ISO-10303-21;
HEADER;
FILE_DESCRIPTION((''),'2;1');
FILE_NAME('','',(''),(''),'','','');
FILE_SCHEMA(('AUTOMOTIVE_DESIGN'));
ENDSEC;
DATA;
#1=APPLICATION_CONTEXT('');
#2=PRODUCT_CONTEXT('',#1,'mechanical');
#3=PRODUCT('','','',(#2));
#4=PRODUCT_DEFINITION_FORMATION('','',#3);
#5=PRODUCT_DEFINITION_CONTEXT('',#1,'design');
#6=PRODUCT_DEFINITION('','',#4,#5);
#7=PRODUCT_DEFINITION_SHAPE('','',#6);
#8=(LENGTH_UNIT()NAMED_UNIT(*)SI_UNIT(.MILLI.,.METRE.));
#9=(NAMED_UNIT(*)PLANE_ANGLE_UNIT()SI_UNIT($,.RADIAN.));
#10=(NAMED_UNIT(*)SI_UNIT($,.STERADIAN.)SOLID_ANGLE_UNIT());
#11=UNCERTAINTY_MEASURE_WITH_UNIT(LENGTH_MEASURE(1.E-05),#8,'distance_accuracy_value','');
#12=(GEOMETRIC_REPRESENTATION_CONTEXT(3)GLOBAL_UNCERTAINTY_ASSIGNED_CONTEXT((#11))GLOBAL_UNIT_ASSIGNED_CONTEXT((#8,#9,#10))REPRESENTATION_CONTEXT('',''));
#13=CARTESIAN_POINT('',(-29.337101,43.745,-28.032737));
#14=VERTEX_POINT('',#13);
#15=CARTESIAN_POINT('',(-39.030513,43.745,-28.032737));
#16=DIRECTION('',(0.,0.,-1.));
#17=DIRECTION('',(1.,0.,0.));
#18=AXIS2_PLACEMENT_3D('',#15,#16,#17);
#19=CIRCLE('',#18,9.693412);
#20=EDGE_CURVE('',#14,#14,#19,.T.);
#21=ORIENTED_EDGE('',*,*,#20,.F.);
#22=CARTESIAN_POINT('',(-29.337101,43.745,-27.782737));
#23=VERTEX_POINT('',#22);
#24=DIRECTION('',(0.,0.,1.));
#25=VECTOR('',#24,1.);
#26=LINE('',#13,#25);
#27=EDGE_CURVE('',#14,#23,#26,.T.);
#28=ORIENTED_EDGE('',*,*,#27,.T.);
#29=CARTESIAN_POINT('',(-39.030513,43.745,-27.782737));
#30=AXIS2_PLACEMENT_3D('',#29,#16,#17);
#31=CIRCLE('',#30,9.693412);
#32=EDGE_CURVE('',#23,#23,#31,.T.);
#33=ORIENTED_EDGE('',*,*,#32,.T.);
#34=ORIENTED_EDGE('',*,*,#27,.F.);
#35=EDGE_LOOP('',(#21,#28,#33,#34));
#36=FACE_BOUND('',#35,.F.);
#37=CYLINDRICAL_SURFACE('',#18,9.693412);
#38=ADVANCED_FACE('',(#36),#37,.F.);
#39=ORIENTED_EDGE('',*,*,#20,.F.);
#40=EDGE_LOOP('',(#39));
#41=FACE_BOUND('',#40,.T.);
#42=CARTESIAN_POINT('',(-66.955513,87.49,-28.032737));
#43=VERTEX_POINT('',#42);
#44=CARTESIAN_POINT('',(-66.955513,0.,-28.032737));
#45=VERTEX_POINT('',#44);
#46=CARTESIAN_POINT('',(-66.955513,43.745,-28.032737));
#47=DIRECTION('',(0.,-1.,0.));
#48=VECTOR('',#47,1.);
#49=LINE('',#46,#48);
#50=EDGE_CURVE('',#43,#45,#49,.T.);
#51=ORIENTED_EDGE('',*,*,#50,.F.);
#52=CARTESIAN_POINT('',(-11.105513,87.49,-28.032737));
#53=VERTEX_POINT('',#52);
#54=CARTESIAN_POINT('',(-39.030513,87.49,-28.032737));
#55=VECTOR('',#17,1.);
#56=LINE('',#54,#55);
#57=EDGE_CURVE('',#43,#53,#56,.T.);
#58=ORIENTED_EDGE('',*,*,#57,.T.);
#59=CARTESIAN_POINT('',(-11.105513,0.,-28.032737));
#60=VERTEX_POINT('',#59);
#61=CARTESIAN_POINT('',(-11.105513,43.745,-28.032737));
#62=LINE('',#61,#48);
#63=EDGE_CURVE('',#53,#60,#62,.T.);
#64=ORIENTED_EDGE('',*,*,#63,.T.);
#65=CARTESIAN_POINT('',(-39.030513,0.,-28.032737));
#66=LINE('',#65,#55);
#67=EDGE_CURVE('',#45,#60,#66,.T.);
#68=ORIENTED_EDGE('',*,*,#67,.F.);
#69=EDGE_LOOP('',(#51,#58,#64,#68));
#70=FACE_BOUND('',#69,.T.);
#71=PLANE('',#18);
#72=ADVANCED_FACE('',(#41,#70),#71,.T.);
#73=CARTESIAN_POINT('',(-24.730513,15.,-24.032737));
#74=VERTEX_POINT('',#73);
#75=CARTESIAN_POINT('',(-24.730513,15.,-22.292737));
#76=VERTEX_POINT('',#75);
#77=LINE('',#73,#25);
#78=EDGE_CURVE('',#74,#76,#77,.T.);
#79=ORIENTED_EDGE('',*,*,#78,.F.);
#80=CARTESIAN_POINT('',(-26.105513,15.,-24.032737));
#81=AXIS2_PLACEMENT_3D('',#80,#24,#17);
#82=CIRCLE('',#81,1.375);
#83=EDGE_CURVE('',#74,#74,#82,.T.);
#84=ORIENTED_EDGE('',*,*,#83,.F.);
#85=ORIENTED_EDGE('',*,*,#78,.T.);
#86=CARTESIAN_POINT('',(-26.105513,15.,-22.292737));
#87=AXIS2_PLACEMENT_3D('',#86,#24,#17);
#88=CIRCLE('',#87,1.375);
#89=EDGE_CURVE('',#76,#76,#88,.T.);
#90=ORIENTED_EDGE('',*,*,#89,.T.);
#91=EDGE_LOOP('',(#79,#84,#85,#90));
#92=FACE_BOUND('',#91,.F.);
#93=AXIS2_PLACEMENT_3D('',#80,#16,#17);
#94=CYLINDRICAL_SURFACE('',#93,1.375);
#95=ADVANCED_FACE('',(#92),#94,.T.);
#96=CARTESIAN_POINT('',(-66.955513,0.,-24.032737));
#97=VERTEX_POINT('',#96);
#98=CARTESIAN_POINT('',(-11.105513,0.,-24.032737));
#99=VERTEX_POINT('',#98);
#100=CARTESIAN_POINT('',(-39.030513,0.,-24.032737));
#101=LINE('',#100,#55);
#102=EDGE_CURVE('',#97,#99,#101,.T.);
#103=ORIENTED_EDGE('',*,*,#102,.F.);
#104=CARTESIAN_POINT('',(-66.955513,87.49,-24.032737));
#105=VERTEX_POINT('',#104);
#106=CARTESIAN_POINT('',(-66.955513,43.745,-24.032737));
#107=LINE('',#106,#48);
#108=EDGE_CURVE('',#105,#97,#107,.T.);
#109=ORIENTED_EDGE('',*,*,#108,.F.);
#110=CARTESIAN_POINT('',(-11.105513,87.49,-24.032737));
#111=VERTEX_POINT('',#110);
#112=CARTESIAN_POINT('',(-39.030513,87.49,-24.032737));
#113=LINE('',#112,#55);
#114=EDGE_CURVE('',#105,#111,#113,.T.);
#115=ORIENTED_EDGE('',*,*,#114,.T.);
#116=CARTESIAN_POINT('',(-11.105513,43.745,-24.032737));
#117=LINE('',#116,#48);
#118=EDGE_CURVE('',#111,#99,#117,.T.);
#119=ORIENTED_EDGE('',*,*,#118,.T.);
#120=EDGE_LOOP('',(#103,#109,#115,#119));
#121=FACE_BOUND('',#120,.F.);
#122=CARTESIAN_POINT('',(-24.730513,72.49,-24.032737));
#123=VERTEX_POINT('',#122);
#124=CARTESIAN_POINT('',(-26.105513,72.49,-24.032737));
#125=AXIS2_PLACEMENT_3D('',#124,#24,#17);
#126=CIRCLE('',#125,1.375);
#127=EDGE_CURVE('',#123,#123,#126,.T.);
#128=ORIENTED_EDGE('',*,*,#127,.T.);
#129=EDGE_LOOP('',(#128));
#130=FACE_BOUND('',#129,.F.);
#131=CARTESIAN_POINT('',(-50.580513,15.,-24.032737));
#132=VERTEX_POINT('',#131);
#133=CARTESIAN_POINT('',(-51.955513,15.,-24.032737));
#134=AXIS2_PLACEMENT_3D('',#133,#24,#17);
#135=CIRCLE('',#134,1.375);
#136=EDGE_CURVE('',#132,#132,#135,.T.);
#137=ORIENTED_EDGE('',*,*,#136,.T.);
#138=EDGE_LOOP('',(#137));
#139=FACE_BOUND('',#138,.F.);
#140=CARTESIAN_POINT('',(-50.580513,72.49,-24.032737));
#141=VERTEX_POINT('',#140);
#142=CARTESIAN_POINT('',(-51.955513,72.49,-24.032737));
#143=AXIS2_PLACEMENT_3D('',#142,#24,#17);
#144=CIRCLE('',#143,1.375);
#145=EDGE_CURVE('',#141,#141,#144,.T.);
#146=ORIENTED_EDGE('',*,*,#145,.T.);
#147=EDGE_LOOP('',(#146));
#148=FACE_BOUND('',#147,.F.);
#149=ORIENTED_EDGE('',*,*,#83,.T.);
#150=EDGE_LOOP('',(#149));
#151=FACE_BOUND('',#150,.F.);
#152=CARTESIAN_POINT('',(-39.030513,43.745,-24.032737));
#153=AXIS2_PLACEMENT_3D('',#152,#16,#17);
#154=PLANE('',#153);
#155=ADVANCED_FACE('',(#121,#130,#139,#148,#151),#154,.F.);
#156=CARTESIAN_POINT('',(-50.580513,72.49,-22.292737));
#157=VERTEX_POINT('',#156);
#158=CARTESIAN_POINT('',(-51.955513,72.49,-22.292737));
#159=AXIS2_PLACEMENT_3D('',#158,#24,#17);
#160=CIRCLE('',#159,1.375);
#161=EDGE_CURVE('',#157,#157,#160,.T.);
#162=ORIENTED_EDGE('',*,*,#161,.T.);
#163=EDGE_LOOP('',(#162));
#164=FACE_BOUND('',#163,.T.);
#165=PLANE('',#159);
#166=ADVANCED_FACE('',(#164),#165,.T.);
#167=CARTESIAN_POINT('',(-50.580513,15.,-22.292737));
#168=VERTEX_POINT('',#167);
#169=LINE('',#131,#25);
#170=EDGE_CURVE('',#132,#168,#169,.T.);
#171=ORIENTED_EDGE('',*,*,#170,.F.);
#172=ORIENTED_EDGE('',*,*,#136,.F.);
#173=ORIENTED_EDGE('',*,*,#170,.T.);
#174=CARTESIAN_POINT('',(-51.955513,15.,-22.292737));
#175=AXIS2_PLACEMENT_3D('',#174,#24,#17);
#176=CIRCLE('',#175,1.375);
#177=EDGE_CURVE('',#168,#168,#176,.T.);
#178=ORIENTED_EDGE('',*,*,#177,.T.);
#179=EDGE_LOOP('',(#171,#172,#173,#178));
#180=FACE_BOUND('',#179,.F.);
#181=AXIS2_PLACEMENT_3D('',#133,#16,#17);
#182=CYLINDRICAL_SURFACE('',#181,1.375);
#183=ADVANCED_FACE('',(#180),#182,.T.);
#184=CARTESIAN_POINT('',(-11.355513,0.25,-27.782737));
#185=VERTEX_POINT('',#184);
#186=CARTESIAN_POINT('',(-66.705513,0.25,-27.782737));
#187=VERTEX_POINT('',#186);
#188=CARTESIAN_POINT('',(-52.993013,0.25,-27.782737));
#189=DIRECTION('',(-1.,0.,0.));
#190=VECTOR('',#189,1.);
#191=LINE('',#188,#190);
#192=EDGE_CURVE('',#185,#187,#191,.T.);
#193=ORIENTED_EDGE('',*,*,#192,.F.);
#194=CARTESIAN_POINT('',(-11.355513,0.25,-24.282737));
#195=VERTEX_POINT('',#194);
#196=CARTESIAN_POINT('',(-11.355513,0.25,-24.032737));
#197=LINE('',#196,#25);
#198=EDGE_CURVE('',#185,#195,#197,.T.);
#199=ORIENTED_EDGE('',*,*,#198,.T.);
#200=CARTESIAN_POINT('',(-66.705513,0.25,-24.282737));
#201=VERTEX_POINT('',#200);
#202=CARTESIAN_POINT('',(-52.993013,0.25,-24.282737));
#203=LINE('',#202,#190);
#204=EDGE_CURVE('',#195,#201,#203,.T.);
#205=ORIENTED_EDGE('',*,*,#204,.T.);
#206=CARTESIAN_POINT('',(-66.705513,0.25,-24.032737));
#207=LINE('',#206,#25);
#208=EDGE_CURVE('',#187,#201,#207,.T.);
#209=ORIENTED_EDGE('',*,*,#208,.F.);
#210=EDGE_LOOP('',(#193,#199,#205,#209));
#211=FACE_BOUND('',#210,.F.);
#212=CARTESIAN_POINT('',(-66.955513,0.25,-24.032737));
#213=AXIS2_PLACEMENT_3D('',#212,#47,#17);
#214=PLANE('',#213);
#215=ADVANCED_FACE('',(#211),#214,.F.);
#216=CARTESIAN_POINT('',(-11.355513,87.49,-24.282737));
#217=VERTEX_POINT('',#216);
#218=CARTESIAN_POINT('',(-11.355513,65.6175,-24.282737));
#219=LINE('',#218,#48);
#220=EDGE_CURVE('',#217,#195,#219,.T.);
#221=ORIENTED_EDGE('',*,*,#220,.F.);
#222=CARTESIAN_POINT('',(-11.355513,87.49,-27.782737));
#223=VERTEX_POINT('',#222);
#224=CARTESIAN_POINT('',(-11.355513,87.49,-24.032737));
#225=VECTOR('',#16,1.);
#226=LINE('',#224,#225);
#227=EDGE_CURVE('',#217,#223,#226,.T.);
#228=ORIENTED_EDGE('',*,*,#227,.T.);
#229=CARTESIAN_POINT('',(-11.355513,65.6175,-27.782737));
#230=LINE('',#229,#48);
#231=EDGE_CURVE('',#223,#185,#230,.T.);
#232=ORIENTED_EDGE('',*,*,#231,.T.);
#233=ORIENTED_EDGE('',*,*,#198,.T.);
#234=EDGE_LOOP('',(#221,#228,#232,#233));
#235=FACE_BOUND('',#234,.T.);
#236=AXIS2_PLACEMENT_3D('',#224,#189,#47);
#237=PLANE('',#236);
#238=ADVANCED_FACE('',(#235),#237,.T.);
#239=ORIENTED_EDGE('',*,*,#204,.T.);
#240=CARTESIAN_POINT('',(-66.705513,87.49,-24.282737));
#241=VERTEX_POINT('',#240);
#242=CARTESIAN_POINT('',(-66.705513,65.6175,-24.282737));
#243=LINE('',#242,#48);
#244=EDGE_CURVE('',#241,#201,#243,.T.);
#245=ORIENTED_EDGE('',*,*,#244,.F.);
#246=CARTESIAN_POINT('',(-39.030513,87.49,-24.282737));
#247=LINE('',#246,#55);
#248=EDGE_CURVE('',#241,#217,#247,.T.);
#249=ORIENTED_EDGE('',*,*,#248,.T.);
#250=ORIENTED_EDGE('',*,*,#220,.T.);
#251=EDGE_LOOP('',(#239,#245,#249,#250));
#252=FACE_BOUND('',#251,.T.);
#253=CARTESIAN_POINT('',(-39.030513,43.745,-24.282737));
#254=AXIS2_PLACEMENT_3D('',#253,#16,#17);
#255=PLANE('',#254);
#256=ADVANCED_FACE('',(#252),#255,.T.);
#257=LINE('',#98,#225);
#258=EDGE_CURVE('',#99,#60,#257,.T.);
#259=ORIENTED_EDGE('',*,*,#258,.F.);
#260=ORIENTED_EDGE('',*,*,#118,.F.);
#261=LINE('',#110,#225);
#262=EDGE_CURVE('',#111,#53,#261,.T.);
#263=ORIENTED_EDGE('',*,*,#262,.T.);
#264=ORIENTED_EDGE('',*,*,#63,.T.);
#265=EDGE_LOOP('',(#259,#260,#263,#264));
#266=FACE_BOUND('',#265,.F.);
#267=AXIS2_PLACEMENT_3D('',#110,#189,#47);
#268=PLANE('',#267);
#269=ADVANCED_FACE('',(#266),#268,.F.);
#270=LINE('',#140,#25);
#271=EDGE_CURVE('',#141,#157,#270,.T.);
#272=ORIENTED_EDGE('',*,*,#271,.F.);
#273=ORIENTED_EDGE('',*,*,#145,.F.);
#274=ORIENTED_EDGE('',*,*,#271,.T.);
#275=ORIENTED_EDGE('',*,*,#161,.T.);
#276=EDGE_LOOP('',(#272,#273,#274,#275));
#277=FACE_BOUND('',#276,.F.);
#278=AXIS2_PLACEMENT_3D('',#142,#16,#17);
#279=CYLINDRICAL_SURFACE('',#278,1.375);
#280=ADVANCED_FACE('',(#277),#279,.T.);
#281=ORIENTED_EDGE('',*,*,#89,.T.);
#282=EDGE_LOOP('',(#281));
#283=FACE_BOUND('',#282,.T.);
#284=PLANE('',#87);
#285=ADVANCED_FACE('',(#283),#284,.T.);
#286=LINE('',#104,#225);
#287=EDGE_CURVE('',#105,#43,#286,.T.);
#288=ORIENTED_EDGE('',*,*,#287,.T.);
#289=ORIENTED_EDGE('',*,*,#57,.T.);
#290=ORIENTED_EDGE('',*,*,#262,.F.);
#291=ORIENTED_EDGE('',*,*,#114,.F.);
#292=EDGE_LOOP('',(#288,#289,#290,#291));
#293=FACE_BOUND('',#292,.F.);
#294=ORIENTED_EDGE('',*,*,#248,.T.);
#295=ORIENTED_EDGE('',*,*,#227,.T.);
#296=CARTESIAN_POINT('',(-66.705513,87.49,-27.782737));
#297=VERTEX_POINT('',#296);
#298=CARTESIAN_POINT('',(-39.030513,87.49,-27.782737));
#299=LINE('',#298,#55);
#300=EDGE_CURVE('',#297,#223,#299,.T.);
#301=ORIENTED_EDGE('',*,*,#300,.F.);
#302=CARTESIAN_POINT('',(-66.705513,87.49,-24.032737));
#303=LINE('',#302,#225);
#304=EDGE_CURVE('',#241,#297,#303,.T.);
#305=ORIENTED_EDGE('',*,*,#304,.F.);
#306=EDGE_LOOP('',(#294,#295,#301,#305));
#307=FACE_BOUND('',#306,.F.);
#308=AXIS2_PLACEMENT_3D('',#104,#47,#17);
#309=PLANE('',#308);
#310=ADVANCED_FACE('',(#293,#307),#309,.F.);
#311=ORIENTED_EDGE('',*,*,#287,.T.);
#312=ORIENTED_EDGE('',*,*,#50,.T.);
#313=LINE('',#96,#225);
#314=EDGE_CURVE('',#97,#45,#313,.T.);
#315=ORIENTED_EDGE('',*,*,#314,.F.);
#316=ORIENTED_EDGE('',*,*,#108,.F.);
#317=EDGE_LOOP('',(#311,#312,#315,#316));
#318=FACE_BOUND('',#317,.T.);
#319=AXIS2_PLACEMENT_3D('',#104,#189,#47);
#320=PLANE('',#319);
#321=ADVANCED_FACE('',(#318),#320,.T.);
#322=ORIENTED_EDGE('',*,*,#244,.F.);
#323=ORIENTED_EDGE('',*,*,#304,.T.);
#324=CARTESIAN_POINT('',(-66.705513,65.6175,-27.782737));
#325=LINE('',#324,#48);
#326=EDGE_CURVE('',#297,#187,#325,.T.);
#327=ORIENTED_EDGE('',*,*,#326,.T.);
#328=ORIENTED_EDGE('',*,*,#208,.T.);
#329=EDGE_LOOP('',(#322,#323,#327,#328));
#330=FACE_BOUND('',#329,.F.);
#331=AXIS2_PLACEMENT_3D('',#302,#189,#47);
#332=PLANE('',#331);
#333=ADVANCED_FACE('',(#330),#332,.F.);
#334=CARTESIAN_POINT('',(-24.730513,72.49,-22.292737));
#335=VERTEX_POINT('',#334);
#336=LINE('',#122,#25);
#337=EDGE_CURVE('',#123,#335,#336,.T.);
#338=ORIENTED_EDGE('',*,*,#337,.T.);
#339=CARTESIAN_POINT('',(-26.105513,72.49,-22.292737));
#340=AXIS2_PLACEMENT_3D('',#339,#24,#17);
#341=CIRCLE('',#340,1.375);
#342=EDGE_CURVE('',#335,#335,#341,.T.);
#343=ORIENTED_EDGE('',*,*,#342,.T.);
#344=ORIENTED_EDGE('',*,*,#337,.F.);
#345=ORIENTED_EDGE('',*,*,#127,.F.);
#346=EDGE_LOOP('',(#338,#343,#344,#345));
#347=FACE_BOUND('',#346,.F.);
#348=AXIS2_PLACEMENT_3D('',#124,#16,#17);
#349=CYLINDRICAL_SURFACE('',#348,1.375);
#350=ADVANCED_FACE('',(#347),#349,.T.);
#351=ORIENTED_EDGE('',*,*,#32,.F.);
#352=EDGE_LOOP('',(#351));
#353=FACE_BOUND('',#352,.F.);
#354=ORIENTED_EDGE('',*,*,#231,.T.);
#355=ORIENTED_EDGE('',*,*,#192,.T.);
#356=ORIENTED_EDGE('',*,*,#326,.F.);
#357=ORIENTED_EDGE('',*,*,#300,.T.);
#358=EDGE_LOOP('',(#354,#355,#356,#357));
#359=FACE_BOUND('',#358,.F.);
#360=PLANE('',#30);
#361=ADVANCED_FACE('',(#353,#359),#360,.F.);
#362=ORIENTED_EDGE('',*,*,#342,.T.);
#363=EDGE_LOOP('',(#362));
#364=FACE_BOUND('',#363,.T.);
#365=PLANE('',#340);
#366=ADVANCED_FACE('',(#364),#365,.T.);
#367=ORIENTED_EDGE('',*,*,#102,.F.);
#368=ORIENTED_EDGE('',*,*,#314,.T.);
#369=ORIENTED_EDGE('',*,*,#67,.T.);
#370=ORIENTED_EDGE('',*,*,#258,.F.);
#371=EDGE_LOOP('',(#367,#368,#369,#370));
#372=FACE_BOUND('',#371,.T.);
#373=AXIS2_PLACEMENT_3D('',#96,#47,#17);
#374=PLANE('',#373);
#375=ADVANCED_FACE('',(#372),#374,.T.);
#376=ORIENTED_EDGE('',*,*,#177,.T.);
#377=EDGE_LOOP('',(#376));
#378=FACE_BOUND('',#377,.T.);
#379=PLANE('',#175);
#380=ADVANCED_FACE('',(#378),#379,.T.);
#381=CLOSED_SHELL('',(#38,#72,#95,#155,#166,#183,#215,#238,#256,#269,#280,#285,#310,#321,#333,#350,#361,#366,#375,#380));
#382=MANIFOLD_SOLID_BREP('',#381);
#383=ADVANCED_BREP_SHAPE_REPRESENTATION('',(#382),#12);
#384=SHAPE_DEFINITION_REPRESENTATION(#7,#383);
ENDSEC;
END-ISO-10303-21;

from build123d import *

# Parameters (mm, degrees)
F0_W      = 55.85
F0_H      = 3
F1_DEPTH  = 87.49
F2_T      = -0.75
F3_DEPTH  = 0.75
F4_W      = 20
F4_H      = 7
F4_W_2    = 16
F4_H_2    = 3
F5_DEPTH  = 0.75
F7_ANGLE  = 90
F8_ANGLE  = 90
F10_ANGLE = 90
F11_ANGLE = 90
F12_R     = 1.5
F13_R     = 1.5
F15_ANGLE = 90
F16_DEPTH = 1
F17_R     = 1.5
F18_R     = 1.5
F19_R     = 1.49999
F20_R     = 1.49999
F21_R     = 4
F22_R     = 4
F23_W     = 55.85
F23_H     = 87.49
F24_DEPTH = 4
F25_T     = -0.25
F26_R     = 9.693411876
F27_DEPTH = 0.25
F29_R     = 1.375
F30_DEPTH = 1.74


# Not quite as in the source:
# - a fillet or chamfer is up to 0.001 mm smaller than in the source, because OpenCascade refuses the exact size


with BuildPart() as f1:
    # F0 (on Front) → F1 (new body)
    with BuildSketch(Plane.XZ):
        with Locations((-39.0305130277, -21.5327367023)):
            Rectangle(F0_W, F0_H)
    extrude(amount=-F1_DEPTH)

    # F2
    f2_openings = [f1.faces().sort_by_distance(p)[0] for p in [
        (-39.030513, 43.745, -20.032737),
    ]]
    offset(amount=F2_T, openings=f2_openings)

    # F3 (cut): a face of the model
    f3_faces = [f1.faces().sort_by_distance(p)[0] for p in [
        (-39.0305130277, 86.74, -21.1577367023),
    ]]
    extrude(f3_faces, amount=-F3_DEPTH, mode=Mode.SUBTRACT)

    # F4 (on face) → F5 (join, through all)
    with BuildSketch(Plane.XY.offset(-22.2827367023)):
        with Locations((-39.0305130277, 90.99)):
            Rectangle(F4_W, F4_H)
        with Locations((-39.0305130277, 90.99)):
            Rectangle(F4_W_2, F4_H_2, mode=Mode.SUBTRACT)
    extrude(amount=-F5_DEPTH)

    # F6 (on face) → F7 (revolve)
    with BuildSketch(Plane.YZ.offset(-66.2055130277)):
        with BuildLine():
            Line((82.49, -21.0327367023), (83.365, -21.0327367023))
            ThreePointArc((83.365, -21.0327367023), (82.49, -20.1577367023), (81.615, -21.0327367023))
            Line((81.615, -21.0327367023), (82.49, -21.0327367023))
        make_face()
    revolve(axis=Axis((-66.2055130277, 82.0525, -21.0327367023), (0, 1, 0)), revolution_arc=F7_ANGLE)

    # F6 (on face) → F8 (revolve)
    with BuildSketch(Plane.YZ.offset(-66.2055130277)):
        with BuildLine():
            Line((27.49, -21.0327367023), (28.365, -21.0327367023))
            ThreePointArc((28.365, -21.0327367023), (27.49, -20.1577367023), (26.615, -21.0327367023))
            Line((26.615, -21.0327367023), (27.49, -21.0327367023))
        make_face()
    revolve(axis=Axis((-66.2055130277, 27.0525, -21.0327367023), (0, 1, 0)), revolution_arc=F8_ANGLE)

    # F9 (on face) → F10 (revolve)
    with BuildSketch(Plane(origin=(-11.8555130277, 0, 0), x_dir=(0, -1, 0), z_dir=(-1, 0, 0))):
        with BuildLine():
            Line((-83.365, -21.0327367023), (-81.615, -21.0327367023))
            ThreePointArc((-81.615, -21.0327367023), (-82.49, -20.1577367023), (-83.365, -21.0327367023))
        make_face()
    revolve(axis=Axis((-11.8555130277, 82.49, -21.0327367023), (0, -1, 0)), revolution_arc=F10_ANGLE)

    # F9 (on face) → F11 (revolve)
    with BuildSketch(Plane(origin=(-11.8555130277, 0, 0), x_dir=(0, -1, 0), z_dir=(-1, 0, 0))):
        with BuildLine():
            Line((-28.365, -21.0327367023), (-26.615, -21.0327367023))
            ThreePointArc((-26.615, -21.0327367023), (-27.49, -20.1577367023), (-28.365, -21.0327367023))
        make_face()
    revolve(axis=Axis((-11.8555130277, 27.49, -21.0327367023), (0, -1, 0)), revolution_arc=F11_ANGLE)

    # F12
    f12_edges = [f1.edges().sort_by_distance(p)[0] for p in [
        (-66.205513, 0.75, -21.157737),
    ]]
    fillet(f12_edges, radius=F12_R)

    # F13
    f13_edges = [f1.edges().sort_by_distance(p)[0] for p in [
        (-11.855513, 0.75, -21.157737),
    ]]
    fillet(f13_edges, radius=F13_R)

    # F14 (on face) → F15 (revolve)
    with BuildSketch(Plane(origin=(0, 0.75, 0), x_dir=(-1, 0, 0), z_dir=(0, 1, 0))):
        with BuildLine():
            Line((38.1555130277, -21.0327367023), (39.9055130277, -21.0327367023))
            ThreePointArc((39.9055130277, -21.0327367023), (39.0305130277, -20.1577367023), (38.1555130277, -21.0327367023))
        make_face()
    revolve(axis=Axis((-39.0305130277, 0.75, -21.0327367023), (-1, 0, 0)), revolution_arc=F15_ANGLE)

    # F16 (add): a face of the model
    f16_faces = [f1.faces().sort_by_distance(p)[0] for p in [
        (-39.0305130277, 44.6180943483, -23.0327367023),
    ]]
    extrude(f16_faces, amount=F16_DEPTH)

    # F17
    f17_edges = [f1.edges().sort_by_distance(p)[0] for p in [
        (-47.030513, 89.49, -23.157737),
    ]]
    fillet(f17_edges, radius=F17_R)

    # F18
    f18_edges = [f1.edges().sort_by_distance(p)[0] for p in [
        (-31.030513, 89.49, -23.157737),
    ]]
    fillet(f18_edges, radius=F18_R)

    # F19 (radius 1.5 in the source; OpenCascade refuses exactly that, so slightly less here)
    f19_edges = [f1.edges().sort_by_distance(p)[0] for p in [
        (-31.030513, 92.49, -23.157737),
    ]]
    fillet(f19_edges, radius=F19_R)

    # F20 (radius 1.5 in the source; OpenCascade refuses exactly that, so slightly less here)
    f20_edges = [f1.edges().sort_by_distance(p)[0] for p in [
        (-47.030513, 92.49, -23.157737),
    ]]
    fillet(f20_edges, radius=F20_R)

    # F21
    f21_edges = [f1.edges().sort_by_distance(p)[0] for p in [
        (-29.030513, 94.49, -23.157737),
    ]]
    fillet(f21_edges, radius=F21_R)

    # F22
    f22_edges = [f1.edges().sort_by_distance(p)[0] for p in [
        (-49.030513, 94.49, -23.157737),
    ]]
    fillet(f22_edges, radius=F22_R)


with BuildPart() as f24:
    # F23 (on face) → F24 (new body)
    with BuildSketch(Plane(origin=(0, 0, -24.0327367023), x_dir=(1, 0, 0), z_dir=(0, 0, -1))):
        with Locations((-39.0305130277, -43.745)):
            Rectangle(F23_W, F23_H)
    extrude(amount=F24_DEPTH)

    # F25
    f25_openings = [f24.faces().sort_by_distance(p)[0] for p in [
        (-39.030513, 87.49, -26.032737),
    ]]
    offset(amount=F25_T, openings=f25_openings)

    # F26 (on face) → F27 (cut, through all)
    with BuildSketch(Plane(origin=(0, 0, -28.0327367023), x_dir=(1, 0, 0), z_dir=(0, 0, -1))):
        with Locations((-39.0305130277, -43.745)):
            Circle(F26_R)
    extrude(amount=-F27_DEPTH, mode=Mode.SUBTRACT)

    # F29 (on face) → F30 (join)
    with BuildSketch(Plane.XY.offset(-24.0327367023)):
        with Locations((-51.9555130277, 15)):
            Circle(F29_R)
        with Locations((-26.1055130277, 15)):
            Circle(F29_R)
        with Locations((-26.1055130277, 72.49)):
            Circle(F29_R)
        with Locations((-51.9555130277, 72.49)):
            Circle(F29_R)
    extrude(amount=F30_DEPTH)


solid = f24.part
